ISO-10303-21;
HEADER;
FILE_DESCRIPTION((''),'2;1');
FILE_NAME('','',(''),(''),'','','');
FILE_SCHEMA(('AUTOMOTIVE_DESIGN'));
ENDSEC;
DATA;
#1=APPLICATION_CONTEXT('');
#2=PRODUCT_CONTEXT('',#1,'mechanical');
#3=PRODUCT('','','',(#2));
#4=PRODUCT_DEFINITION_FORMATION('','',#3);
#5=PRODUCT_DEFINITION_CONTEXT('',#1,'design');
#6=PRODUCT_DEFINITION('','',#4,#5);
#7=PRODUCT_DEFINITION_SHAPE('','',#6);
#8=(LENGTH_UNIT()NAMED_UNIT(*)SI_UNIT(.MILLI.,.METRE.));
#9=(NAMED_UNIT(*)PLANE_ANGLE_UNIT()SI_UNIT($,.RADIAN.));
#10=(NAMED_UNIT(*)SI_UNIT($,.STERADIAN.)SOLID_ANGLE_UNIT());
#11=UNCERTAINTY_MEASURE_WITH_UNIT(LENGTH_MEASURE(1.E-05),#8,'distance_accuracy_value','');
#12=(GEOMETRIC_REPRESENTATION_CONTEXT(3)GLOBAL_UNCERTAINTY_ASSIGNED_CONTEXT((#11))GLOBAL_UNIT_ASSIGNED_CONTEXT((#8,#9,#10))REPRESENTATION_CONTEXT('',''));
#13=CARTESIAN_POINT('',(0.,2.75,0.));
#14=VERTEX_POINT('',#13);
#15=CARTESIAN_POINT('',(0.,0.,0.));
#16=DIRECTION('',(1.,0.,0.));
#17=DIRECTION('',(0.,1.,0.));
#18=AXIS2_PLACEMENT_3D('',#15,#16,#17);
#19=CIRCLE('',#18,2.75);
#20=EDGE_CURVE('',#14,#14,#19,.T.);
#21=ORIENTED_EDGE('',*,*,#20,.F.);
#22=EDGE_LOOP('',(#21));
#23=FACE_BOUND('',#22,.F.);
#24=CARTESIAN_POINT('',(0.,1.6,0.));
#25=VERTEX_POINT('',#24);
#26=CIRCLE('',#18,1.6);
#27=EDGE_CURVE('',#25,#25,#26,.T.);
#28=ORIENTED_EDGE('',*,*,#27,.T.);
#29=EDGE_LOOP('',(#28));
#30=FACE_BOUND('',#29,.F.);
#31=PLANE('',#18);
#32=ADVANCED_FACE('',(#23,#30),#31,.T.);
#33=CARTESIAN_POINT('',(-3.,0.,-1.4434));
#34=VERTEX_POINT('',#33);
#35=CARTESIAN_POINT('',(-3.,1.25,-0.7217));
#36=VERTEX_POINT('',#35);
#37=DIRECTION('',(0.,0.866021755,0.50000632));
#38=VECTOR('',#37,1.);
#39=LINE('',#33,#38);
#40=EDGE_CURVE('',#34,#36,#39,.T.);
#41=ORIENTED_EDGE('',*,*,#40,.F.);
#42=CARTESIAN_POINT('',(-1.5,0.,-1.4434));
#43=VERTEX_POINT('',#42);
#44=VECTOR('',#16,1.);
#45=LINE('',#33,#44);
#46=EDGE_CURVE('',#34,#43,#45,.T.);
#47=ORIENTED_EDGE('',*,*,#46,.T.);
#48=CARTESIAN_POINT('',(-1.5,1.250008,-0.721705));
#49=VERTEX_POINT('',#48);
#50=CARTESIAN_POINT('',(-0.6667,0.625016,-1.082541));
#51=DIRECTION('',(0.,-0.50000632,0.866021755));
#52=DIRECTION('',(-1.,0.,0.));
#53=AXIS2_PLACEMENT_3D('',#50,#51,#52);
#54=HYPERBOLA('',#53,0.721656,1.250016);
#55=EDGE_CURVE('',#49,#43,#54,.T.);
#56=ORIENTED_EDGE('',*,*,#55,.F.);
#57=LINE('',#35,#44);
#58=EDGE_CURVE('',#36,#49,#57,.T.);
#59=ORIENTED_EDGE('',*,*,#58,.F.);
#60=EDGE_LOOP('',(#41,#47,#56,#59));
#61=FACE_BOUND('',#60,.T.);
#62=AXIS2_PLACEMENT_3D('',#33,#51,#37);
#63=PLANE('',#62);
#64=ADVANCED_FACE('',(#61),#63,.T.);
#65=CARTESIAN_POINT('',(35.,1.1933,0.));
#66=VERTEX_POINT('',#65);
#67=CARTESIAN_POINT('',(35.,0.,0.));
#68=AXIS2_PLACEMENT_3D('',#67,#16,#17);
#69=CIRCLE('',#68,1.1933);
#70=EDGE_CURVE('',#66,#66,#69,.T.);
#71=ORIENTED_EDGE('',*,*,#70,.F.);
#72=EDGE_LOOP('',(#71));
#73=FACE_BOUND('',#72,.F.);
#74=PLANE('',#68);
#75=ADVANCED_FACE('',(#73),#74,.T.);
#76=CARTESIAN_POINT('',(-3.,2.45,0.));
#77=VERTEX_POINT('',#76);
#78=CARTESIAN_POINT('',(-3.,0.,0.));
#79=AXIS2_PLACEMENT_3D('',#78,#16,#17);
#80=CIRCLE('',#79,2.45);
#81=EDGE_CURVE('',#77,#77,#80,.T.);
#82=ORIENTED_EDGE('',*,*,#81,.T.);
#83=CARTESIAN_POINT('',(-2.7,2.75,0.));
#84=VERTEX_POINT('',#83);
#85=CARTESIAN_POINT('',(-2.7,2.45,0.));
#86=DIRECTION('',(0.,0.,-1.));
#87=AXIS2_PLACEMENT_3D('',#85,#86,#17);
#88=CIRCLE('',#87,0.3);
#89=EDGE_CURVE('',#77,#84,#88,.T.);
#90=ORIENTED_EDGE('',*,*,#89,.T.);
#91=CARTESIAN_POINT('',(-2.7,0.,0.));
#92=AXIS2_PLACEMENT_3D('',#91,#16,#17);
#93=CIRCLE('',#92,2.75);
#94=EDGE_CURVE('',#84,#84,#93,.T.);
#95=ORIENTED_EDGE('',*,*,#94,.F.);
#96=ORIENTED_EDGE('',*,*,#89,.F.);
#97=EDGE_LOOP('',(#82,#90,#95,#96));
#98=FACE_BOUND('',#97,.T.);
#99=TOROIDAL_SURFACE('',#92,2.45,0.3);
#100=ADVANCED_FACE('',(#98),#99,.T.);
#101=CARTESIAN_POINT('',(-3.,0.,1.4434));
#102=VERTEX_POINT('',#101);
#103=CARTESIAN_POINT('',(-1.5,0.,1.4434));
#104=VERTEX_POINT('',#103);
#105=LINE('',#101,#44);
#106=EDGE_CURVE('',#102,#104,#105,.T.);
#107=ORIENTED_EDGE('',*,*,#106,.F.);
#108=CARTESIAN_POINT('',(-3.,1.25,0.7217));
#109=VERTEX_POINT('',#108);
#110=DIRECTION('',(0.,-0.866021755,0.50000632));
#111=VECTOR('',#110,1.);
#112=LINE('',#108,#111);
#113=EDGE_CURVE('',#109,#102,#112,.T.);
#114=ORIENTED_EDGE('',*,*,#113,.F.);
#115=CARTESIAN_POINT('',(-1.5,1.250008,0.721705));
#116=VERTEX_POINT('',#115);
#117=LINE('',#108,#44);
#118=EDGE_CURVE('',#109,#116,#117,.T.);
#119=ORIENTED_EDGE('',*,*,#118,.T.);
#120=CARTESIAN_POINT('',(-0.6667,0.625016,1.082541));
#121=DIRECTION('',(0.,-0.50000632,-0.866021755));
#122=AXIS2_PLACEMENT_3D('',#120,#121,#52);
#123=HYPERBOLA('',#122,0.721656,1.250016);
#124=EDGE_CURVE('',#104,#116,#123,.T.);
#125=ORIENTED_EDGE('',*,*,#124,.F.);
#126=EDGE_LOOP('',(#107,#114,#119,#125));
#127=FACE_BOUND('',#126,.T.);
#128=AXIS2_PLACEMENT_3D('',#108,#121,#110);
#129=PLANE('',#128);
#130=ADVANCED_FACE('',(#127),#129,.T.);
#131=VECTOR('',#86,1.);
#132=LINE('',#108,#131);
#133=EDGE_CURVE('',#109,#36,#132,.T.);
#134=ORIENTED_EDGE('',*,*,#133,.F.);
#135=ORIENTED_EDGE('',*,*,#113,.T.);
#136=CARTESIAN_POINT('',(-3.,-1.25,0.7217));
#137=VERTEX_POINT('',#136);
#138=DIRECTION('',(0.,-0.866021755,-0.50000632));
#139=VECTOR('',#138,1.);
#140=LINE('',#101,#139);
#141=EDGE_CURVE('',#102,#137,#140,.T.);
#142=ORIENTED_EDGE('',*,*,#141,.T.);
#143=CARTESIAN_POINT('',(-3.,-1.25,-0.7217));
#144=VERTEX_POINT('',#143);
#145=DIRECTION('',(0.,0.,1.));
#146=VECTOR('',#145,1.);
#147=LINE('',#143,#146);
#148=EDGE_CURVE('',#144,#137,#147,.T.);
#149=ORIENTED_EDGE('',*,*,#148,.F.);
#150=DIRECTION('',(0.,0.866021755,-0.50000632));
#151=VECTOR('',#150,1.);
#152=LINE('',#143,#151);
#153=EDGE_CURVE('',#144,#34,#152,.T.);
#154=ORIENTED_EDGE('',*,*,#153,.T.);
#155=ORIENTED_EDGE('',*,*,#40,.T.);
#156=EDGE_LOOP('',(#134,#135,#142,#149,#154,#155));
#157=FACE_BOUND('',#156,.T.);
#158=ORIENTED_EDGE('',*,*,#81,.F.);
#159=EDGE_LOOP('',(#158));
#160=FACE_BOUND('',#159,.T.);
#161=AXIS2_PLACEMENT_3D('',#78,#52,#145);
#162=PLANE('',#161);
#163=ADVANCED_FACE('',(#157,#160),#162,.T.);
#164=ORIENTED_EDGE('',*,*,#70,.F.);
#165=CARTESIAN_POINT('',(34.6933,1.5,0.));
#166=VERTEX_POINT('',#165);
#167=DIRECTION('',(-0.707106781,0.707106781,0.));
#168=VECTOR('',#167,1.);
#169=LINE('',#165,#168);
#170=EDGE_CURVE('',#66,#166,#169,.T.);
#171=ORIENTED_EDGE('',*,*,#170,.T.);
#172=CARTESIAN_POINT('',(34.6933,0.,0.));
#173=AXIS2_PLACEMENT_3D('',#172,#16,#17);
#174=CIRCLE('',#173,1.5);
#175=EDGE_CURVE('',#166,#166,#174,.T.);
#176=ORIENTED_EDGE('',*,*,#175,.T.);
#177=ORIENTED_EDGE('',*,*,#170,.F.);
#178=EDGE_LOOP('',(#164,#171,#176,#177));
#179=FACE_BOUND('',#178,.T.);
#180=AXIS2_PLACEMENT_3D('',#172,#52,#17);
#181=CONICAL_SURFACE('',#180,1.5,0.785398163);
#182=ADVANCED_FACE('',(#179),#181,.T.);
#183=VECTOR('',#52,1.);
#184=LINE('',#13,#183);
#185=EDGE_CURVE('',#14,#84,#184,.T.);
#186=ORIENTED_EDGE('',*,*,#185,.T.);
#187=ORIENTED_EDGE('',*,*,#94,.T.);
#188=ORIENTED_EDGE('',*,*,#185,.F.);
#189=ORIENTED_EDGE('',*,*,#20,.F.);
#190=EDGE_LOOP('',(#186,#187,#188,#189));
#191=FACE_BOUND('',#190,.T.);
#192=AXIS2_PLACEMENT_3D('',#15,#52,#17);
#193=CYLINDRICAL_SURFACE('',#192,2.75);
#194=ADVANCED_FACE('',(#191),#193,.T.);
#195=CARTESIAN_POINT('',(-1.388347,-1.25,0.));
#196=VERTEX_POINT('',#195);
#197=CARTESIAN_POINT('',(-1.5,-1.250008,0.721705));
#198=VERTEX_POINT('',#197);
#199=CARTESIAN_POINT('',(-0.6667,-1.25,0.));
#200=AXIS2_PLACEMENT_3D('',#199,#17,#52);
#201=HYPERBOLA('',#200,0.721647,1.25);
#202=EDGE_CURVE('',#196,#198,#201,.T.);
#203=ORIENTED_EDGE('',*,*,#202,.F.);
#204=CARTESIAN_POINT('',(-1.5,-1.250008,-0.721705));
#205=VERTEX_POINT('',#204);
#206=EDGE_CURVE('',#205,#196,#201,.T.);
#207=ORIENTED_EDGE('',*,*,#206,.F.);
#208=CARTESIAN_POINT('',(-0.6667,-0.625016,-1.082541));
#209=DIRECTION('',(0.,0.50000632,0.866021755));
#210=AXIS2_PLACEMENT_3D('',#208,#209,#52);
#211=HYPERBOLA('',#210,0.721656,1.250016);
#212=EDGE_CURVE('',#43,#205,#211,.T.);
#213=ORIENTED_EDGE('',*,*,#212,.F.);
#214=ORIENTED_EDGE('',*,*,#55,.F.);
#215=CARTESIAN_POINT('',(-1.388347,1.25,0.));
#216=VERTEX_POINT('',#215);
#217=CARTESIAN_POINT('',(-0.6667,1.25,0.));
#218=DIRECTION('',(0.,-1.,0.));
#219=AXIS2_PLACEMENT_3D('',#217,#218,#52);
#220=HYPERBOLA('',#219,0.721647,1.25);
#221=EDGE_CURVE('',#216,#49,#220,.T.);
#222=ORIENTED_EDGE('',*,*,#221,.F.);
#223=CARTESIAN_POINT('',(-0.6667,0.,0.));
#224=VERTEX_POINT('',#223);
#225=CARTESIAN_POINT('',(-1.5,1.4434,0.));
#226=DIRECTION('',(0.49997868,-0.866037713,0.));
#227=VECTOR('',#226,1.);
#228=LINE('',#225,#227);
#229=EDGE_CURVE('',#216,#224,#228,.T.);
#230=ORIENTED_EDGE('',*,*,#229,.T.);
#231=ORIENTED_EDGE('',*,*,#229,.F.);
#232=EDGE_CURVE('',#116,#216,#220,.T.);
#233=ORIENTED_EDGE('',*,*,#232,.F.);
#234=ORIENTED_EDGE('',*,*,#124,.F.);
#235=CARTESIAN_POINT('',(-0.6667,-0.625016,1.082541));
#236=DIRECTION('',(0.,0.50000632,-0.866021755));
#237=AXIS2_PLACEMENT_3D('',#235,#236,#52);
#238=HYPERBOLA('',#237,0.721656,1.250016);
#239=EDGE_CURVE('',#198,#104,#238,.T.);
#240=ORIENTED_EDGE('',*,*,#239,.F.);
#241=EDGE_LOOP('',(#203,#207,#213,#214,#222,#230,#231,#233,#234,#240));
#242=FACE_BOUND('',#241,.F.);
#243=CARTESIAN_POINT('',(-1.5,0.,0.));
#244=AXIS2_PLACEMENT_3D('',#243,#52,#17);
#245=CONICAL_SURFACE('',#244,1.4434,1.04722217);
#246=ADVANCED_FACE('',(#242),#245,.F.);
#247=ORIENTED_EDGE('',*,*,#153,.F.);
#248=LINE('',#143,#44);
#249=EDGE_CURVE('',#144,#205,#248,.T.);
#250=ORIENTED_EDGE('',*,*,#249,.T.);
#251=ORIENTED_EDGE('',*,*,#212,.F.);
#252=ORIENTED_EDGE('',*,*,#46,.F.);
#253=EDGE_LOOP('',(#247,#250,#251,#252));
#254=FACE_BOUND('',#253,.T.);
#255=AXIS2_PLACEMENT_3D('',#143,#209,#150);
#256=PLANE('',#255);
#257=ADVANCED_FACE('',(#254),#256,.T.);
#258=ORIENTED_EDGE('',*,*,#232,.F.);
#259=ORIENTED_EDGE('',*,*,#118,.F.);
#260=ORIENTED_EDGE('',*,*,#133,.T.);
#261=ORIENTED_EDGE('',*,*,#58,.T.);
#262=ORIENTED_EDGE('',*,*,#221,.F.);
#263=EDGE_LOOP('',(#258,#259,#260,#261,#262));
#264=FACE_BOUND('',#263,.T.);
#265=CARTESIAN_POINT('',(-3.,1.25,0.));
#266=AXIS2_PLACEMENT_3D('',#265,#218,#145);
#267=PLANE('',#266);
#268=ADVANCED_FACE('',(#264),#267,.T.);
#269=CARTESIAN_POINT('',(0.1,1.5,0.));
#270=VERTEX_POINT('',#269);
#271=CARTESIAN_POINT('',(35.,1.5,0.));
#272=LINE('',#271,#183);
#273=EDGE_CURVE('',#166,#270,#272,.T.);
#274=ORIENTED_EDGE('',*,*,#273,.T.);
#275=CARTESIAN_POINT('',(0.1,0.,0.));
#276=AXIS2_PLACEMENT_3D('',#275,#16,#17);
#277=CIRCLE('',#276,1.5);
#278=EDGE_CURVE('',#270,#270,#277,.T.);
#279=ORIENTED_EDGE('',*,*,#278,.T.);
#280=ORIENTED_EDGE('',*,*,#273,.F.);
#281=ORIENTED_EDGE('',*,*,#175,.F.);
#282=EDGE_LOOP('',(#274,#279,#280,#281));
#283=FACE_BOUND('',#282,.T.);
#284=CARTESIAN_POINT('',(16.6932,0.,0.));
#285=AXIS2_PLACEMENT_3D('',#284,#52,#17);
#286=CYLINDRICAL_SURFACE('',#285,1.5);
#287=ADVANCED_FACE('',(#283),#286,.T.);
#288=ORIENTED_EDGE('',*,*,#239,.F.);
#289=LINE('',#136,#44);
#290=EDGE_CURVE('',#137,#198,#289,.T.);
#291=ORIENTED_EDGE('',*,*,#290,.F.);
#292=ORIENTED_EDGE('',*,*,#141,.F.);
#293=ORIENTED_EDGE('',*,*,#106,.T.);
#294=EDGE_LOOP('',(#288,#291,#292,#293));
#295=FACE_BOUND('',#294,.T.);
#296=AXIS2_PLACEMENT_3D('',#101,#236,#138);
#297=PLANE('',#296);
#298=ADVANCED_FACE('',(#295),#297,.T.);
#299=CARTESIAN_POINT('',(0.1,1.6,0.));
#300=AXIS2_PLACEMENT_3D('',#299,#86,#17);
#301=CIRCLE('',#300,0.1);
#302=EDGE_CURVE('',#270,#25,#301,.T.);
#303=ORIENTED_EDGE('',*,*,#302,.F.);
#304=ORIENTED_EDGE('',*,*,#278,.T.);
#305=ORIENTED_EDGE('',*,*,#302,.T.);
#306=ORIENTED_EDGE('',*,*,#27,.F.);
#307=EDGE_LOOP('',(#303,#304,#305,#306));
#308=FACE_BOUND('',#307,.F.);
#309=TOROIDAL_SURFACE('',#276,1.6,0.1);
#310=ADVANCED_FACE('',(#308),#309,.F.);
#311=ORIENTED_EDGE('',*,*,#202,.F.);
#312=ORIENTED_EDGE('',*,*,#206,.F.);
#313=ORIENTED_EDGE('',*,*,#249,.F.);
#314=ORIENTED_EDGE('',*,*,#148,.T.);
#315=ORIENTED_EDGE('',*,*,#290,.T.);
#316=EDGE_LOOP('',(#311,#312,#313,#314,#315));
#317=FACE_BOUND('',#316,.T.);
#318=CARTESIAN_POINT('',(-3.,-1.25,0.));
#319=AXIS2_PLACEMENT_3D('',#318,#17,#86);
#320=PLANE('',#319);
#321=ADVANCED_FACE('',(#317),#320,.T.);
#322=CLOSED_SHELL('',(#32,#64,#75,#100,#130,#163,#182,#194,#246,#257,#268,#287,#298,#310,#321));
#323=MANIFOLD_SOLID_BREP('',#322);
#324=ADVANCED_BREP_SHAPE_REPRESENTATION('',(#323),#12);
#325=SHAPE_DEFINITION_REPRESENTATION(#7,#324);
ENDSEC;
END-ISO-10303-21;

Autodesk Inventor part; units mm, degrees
ref_plane "YZ Plane" through (0, 0, 0) normal (1, 0, 0) x (0, 1, 0)
ref_plane "XZ Plane" through (0, 0, 0) normal (0, 1, 0) x (-1, 0, 0)
sketch "Esquisse1" plane through (0, 0, 0) normal (0, 0, 1) x (1, 0, 0)
  line L0 (-0.6667, 0) -> (35, 0)
  line L1 (35, 0) -> (35, 1.5)
  line L2 (35, 1.5) -> (17, 1.5)
  line L3 (17, 1.5) -> (16.6932, 1.5)
  line L4 (16.6932, 1.5) -> (0, 1.5)
  line L5 (0, 1.5) -> (0, 2.75)
  line L6 (0, 2.75) -> (-3, 2.75)
  line L7 (-3, 2.75) -> (-3, 1.4434)
  line L8 (-3, 1.4434) -> (-1.5, 1.4434)
  line L9 (-1.5, 1.4434) -> (-0.6667, 0)
  line L10 (-10.6, 0) -> (42.6, 0) projected
  line L11 (0, -0.55) -> (0, 3.3) projected
  line L12 (17, 1.5) -> (0, 1.5) construction
  dimension "d1" = 18
  dimension "d2" = 0.3068
  dimension "d3" = 3
  dimension "d4" = 1.5
  dimension "d5" = 60
  dimension "d6" = 3
  dimension "d7" = 3
  dimension "d8" = 2.8868
  dimension "d9" = 5.5
  dimension "d26" = 35
revolve "Corps" add sketch "Esquisse1" angle 360 about axis through (-0.6667, 0, 0) along (1, 0, 0)
sketch "Esquisse2" plane through (-3, 0, 0) normal (-1, 0, 0) x (0, 0, 1)
  circle A0 centre (0, 0) radius 1.4434 projected
  line L0 (0, -3.85) -> (0, 3.85) projected
  line L1 (-3.85, 0) -> (3.85, 0) projected
  line L2 (1.4434, 0) -> (0.7217, -1.25)
  line L3 (0.7217, -1.25) -> (-0.7217, -1.25)
  line L4 (-0.7217, -1.25) -> (-1.4434, 0)
  line L5 (-1.4434, 0) -> (-0.7217, 1.25)
  line L6 (-0.7217, 1.25) -> (0.7217, 1.25)
  line L7 (0.7217, 1.25) -> (1.4434, 0)
extrude "Rainure" add sketch "Esquisse2" against normal up to next contours L7 A0 | A0 L2 | L6 L0 A0 | A0 L0 L3 | L0 L6 A0 | A0 L3 L0 | L4 A0 | A0 L5
fillet "Congé1" radius 0.3 1 edges at (-3, -2.75, 0)
thread "Filetage" size "M3x0.5" class "6g" standard "ISO Metric profile" length 18
chamfer "Chanfrein1" distance 0.3067 distance2 0.3067 1 edges at (35, -1.5, 0) measured on face at (35, -0.8773, -0.3972)
ref_plane "Work Plane1" through (29, 0, 0) normal (0, -1, 0) x (1, 0, 0)
fillet "Fillet2" radius 0.1 1 edges at (0, -1.5, 0)
equation "\"d30\" = R"
equation "\"d17\" = RR"
equation "\"d13\" = GEL"
equation "\"d15\" = -0.5 * SPD + 0.5 * GD"
equation "\"d16\" = GUL"
equation "\"d1\" = GEL"
equation "\"d3\" = KOH"
equation "\"d4\" = INTI"
equation "\"d6\" = GD"
equation "\"d7\" = BDM"
equation "\"d8\" = 1.1547 * SW"
equation "\"d9\" = KOD"
equation "\"d26\" = NLG"
equation "\"GD\" = NND"
equation "\"NLG\" = 35"
equation "\"GEL\" = 18"
equation "\"KOD\" = 5.5"
equation "\"KOH\" = 3"
equation "\"INTI\" = 1.5"
equation "\"GAL\" = 0.61345 * PTC"
equation "\"GUL\" = 0.61345 * PTC"
equation "\"BDM\" = NND"
equation "\"SW\" = 2.5"
equation "\"RR\" = 0.3"
equation "\"SPD\" = 2.38655"
equation "\"R\" = 0.1"
equation "\"TOA\" = 30deg"
equation "\"THREADDIA\" = 3"
equation "\"PTC\" = 0.5"
equation "\"NND\" = 3"
equation "\"E0\" = 1.155 * SW"
equation "\"GD1\" = THREADDIA - 1.2269 * PTC"
properties part number "ANSI B18.3.1M - M3x0,5 x 35, FSHCSM" material "Acier, doux"
